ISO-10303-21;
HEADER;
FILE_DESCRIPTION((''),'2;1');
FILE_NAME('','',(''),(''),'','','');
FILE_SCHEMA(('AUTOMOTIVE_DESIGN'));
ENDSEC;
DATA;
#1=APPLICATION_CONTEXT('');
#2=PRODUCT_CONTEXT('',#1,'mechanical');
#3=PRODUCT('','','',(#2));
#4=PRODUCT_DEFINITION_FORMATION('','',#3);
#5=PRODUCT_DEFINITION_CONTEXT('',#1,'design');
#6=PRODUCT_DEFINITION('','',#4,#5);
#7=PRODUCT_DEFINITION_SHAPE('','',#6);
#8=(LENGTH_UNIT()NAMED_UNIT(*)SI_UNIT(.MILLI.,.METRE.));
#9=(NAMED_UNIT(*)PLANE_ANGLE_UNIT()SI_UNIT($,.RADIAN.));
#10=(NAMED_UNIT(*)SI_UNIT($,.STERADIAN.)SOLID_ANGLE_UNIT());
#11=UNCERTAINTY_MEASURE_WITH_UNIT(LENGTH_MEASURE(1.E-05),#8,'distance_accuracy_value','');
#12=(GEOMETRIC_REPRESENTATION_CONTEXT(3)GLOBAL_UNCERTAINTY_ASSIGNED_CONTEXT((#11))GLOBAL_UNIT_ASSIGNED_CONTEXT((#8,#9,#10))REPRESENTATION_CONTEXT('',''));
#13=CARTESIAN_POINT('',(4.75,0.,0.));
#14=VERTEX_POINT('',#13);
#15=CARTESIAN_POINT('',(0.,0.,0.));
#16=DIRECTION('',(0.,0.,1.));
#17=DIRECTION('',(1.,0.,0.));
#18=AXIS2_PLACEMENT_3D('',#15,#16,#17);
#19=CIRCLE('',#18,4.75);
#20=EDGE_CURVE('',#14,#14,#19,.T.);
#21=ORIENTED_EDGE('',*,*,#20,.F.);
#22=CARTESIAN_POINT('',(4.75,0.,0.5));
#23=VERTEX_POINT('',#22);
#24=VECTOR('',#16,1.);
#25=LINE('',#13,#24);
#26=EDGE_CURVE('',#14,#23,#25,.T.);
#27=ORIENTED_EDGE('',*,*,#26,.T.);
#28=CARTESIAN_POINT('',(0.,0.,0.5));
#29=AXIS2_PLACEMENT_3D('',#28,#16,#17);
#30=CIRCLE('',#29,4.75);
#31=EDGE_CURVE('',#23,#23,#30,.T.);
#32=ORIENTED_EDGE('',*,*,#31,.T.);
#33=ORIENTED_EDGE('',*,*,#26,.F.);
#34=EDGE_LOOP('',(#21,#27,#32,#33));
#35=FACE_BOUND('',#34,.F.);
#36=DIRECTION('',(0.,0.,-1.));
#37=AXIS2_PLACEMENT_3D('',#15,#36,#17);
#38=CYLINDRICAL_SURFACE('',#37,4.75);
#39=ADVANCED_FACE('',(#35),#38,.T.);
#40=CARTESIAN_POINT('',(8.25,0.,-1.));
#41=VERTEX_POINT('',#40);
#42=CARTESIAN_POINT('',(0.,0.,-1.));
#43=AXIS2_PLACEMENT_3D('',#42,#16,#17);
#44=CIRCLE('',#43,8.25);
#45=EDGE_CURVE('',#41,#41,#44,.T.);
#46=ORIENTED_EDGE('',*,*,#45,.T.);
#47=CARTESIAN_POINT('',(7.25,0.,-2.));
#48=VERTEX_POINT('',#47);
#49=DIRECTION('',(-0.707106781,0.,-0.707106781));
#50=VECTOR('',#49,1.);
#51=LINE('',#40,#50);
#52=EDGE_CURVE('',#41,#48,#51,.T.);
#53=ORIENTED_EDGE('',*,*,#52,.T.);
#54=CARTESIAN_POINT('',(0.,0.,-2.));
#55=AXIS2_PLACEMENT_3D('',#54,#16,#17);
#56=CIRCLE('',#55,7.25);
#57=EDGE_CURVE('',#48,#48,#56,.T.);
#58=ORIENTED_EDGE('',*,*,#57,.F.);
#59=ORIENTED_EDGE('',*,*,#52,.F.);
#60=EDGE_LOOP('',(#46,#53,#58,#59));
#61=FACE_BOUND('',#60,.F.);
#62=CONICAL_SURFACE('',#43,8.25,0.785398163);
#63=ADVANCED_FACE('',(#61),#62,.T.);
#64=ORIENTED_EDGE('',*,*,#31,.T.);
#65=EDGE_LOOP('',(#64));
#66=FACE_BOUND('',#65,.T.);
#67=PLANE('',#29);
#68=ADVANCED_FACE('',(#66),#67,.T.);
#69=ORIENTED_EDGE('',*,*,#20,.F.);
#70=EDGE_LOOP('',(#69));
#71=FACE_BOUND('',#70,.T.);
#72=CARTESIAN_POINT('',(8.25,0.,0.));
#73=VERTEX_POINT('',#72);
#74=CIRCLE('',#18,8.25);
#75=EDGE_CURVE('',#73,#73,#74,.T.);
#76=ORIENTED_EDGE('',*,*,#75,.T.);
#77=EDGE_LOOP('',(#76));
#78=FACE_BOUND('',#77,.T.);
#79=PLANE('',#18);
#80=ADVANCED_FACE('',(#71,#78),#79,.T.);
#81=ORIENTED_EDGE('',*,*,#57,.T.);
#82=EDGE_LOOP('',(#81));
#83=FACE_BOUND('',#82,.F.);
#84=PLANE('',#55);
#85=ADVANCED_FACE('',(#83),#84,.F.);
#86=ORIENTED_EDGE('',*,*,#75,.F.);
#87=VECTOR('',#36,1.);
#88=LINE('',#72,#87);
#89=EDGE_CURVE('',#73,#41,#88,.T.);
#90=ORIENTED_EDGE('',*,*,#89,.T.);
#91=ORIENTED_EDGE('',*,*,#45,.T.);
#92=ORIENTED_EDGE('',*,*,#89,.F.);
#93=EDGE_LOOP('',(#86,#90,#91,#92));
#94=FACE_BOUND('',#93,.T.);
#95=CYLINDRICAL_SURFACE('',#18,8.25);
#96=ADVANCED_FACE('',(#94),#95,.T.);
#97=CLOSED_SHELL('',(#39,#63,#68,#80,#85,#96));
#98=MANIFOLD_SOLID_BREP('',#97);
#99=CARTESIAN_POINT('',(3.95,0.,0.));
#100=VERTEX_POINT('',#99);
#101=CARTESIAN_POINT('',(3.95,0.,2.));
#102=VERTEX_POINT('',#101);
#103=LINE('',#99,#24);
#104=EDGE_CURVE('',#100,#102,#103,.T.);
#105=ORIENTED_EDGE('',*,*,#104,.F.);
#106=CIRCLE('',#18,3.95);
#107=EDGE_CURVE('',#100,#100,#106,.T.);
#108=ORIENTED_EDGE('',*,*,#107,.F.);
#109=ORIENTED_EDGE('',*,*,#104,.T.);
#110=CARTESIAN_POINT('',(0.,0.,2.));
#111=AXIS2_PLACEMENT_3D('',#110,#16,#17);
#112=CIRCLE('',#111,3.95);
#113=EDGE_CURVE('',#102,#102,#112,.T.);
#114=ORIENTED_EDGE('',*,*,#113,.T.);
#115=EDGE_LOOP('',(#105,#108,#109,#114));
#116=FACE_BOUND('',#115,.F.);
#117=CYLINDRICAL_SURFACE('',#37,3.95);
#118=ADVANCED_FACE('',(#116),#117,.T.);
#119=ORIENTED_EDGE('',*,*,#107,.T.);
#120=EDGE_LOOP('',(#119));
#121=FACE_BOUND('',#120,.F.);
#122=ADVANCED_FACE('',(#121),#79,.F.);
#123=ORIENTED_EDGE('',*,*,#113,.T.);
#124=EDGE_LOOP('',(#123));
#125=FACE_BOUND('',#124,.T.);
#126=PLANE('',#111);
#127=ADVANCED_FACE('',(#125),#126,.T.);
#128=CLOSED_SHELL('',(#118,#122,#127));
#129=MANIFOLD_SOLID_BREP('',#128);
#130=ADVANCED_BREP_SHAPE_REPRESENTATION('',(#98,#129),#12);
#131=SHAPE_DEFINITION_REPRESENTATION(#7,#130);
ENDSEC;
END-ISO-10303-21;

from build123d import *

# Parameters (mm, degrees)
F0_R     = 3.95
F1_DEPTH = 2
F0_R_2   = 8.25
F0_R_3   = 4.75
F2_DEPTH = 2
F3_DEPTH = 0.5
F4_SIZE  = 1


with BuildPart() as f1:
    # F0 (on Top) → F1 (new body)
    with BuildSketch(Plane.XY):
        Circle(F0_R)
    extrude(amount=F1_DEPTH)


with BuildPart() as f2:
    # F0 (on Top) → F2 (new body)
    with BuildSketch(Plane.XY):
        Circle(F0_R_2)
        Circle(F0_R_3, mode=Mode.SUBTRACT)
        Circle(F0_R_3)
        Circle(F0_R, mode=Mode.SUBTRACT)
        Circle(F0_R)
    extrude(amount=-F2_DEPTH)

    # F0 (on Top) → F3 (join)
    with BuildSketch(Plane.XY):
        Circle(F0_R_3)
        Circle(F0_R, mode=Mode.SUBTRACT)
        Circle(F0_R)
    extrude(amount=F3_DEPTH)

    # F4
    f4_edges = [f2.edges().sort_by_distance(p)[0] for p in [
        (-8.25, 0, -2),
    ]]
    chamfer(f4_edges, length=F4_SIZE)


solid = Compound([f1.part, f2.part])
